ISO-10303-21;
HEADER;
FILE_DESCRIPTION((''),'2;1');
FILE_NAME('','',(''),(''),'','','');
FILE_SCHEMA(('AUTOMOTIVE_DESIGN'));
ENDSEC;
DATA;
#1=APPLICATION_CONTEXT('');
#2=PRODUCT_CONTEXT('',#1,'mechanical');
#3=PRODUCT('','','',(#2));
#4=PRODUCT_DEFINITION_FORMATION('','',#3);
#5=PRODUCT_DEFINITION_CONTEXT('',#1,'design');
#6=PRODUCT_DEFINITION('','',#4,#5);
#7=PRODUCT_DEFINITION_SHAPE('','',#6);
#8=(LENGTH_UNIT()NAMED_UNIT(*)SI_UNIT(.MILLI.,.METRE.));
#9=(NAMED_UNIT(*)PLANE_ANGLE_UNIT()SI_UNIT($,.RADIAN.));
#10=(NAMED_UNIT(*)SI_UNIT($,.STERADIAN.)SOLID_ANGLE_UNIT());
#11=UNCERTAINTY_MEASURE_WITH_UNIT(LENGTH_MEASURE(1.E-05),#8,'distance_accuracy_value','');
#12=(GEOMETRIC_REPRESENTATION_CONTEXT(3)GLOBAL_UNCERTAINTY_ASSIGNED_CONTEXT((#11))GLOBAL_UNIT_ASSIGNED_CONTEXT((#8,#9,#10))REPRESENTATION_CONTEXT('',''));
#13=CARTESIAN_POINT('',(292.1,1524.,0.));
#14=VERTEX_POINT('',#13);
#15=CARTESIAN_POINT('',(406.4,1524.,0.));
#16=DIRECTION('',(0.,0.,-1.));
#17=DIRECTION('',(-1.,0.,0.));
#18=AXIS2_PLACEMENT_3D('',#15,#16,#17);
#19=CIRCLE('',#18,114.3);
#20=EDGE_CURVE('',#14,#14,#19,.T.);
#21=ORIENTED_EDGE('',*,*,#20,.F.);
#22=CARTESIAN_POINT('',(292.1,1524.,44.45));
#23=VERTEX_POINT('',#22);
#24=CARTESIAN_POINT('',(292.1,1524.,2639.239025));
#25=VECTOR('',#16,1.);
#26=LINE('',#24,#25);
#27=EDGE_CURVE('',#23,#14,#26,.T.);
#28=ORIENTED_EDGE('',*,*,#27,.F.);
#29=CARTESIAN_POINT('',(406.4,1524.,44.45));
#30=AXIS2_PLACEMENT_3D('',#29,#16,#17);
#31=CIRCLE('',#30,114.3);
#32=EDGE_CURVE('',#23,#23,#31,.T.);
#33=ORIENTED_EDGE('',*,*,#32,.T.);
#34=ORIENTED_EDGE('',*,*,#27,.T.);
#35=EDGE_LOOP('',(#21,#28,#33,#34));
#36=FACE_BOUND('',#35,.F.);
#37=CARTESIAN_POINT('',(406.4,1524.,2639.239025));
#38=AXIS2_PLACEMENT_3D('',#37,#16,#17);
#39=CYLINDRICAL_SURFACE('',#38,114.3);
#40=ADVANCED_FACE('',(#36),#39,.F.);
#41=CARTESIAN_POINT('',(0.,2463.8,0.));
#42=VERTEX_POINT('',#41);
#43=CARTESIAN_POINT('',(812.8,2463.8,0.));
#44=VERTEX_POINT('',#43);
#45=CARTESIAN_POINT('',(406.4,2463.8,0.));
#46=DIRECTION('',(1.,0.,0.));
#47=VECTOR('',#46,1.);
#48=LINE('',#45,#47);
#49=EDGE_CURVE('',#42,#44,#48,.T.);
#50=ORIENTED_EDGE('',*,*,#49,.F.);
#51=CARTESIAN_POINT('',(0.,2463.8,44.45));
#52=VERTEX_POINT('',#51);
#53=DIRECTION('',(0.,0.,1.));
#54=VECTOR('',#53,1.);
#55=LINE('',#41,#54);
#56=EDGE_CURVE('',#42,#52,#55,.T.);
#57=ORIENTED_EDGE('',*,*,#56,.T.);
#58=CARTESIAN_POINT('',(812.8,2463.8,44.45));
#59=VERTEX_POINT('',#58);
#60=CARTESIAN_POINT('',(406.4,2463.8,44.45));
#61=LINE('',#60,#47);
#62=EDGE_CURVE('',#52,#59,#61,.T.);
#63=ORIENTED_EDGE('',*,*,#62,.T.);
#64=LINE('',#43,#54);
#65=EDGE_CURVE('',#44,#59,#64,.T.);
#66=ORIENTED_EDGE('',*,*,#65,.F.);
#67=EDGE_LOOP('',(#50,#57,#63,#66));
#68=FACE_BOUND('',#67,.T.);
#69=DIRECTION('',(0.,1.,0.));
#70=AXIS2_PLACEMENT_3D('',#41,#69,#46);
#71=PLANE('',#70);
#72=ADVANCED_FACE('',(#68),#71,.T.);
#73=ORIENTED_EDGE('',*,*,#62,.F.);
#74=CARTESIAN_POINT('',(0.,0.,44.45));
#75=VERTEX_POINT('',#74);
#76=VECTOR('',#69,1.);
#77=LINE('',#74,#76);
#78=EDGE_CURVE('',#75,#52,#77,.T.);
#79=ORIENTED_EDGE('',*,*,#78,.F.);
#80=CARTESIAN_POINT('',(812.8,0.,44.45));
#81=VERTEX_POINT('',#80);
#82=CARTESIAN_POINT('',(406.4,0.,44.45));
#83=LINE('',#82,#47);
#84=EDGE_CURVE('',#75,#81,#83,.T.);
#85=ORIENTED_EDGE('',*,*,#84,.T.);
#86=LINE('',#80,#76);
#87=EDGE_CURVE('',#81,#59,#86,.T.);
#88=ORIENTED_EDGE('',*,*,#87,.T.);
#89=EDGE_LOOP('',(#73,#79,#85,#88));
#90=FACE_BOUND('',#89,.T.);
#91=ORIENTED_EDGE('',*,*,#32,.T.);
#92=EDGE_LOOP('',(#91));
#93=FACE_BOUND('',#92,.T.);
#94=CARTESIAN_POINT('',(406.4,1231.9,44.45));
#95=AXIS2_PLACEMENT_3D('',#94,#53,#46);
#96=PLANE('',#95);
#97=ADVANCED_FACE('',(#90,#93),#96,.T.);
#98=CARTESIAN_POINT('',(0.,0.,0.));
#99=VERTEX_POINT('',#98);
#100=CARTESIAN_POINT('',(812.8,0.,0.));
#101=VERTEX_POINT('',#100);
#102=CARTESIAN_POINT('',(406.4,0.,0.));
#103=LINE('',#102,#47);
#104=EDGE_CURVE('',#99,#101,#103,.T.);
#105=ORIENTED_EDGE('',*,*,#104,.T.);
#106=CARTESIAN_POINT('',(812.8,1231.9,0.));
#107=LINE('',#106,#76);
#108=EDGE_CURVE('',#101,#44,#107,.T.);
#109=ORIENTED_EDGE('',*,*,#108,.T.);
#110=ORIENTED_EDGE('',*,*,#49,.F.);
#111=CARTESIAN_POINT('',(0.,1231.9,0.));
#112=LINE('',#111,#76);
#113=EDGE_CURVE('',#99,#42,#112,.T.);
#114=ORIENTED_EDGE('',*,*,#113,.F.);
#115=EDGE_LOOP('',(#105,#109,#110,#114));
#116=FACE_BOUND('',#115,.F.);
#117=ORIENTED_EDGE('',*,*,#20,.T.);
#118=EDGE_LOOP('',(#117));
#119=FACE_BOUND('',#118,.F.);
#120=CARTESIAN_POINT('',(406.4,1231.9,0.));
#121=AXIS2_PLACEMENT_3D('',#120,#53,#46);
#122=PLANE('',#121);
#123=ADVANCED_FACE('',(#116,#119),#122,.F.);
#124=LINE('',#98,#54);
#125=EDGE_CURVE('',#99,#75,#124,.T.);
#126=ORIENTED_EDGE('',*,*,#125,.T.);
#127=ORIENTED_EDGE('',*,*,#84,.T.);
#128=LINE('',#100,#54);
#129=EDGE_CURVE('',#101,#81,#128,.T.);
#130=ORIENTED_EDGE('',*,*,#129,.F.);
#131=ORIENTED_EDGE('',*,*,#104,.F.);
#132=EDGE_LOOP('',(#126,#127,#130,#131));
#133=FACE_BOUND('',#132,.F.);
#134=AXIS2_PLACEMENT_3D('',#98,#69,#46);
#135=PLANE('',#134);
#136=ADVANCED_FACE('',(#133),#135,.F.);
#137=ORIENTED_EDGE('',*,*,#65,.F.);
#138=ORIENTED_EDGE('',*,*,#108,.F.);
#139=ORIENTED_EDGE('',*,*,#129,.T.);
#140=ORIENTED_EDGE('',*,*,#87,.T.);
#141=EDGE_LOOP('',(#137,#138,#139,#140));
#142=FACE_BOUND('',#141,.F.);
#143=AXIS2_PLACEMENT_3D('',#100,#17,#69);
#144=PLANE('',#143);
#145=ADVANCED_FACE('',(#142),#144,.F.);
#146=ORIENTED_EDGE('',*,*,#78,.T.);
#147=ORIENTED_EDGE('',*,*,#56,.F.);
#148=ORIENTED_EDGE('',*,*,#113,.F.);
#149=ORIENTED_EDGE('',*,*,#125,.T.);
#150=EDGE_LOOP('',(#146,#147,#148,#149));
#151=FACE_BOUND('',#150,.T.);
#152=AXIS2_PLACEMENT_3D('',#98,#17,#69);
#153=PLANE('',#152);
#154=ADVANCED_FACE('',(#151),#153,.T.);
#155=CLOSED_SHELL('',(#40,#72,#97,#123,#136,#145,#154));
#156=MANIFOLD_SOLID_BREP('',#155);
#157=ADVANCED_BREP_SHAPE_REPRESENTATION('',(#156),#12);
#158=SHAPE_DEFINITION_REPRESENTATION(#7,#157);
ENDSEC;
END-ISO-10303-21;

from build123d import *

# Parameters (mm, degrees)
F0_W     = 812.8
F0_H     = 2463.8
F1_DEPTH = 44.45
F3_D     = 228.6
F4_W     = 812.8
F4_H     = 50.8
F5_DEPTH = 3.429


# Not quite as in the source:
# - a feature names something its author has since deleted; it is built from what else it names


with BuildPart() as f1:
    # F0 (on Top) → F1 (new body)
    with BuildSketch(Plane.XY):
        with Locations((406.4, 1231.9)):
            Rectangle(F0_W, F0_H)
    extrude(amount=F1_DEPTH)

    # F3 (through all)
    with Locations(Plane.XY.offset(44.45)):
        with Locations((406.4, 1524)):
            Hole(F3_D / 2)

    # F4 (on face) → F5 (join)
    with BuildSketch(Plane.XY.offset(44.45)):
        with Locations((406.4, 2133.6)):
            Rectangle(F4_W, F4_H)
        with Locations((406.4, 2032)):
            Rectangle(F4_W, F4_H)
        with Locations((406.4, 1930.4)):
            Rectangle(F4_W, F4_H)
        with Locations((406.4, 1828.8)):
            Rectangle(F4_W, F4_H)
        with Locations((406.4, 1727.2)):
            Rectangle(F4_W, F4_H)
        with BuildLine():
            Line((0, 1549.4), (0, 1498.6))
            Line((0, 1498.6), (256.1315735093, 1498.6))
            ThreePointArc((256.1315735093, 1498.6), (254, 1524), (256.1315735093, 1549.4))
            Line((256.1315735093, 1549.4), (0, 1549.4))
        make_face()
        with BuildLine():
            Line((556.6684264907, 1498.6), (812.8, 1498.6))
            Line((812.8, 1498.6), (812.8, 1549.4))
            Line((812.8, 1549.4), (556.6684264907, 1549.4))
            ThreePointArc((556.6684264907, 1549.4), (558.2661716729, 1536.7446420666), (558.8, 1524))
            ThreePointArc((558.8, 1524), (558.2661716729, 1511.2553579334), (556.6684264907, 1498.6))
        make_face()
        with BuildLine():
            Line((490.642269675, 1397), (812.8, 1397))
            Line((812.8, 1397), (812.8, 1447.8))
            Line((812.8, 1447.8), (538.3822715367, 1447.8))
            ThreePointArc((538.3822715367, 1447.8), (517.455945611, 1419.6336407436), (490.642269675, 1397))
        make_face()
        with Locations((406.4, 1320.8)):
            Rectangle(F4_W, F4_H)
        Polygon((0, 1231.9), (0, 1193.8), (812.8, 1193.8), (812.8, 1231.9), (812.8, 1244.6), (0, 1244.6), align=None)
        with Locations((406.4, 1117.6)):
            Rectangle(F4_W, F4_H)
        with Locations((406.4, 1016)):
            Rectangle(F4_W, F4_H)
        with Locations((406.4, 914.4)):
            Rectangle(F4_W, F4_H)
        with Locations((406.4, 812.8)):
            Rectangle(F4_W, F4_H)
        with Locations((406.4, 711.2)):
            Rectangle(F4_W, F4_H)
        with Locations((406.4, 609.6)):
            Rectangle(F4_W, F4_H)
        with Locations((406.4, 508)):
            Rectangle(F4_W, F4_H)
        with Locations((406.4, 406.4)):
            Rectangle(F4_W, F4_H)
        with Locations((406.4, 304.8)):
            Rectangle(F4_W, F4_H)
        with Locations((406.4, 203.2)):
            Rectangle(F4_W, F4_H)
        with BuildLine():
            Line((538.3822715367, 1600.2), (812.8, 1600.2))
            Line((812.8, 1600.2), (812.8, 1651))
            Line((812.8, 1651), (490.642269675, 1651))
            ThreePointArc((490.642269675, 1651), (517.455945611, 1628.3663592564), (538.3822715367, 1600.2))
        make_face()
        with BuildLine():
            Line((0, 1447.8), (0, 1397))
            Line((0, 1397), (322.157730325, 1397))
            ThreePointArc((322.157730325, 1397), (295.344054389, 1419.6336407436), (274.4177284633, 1447.8))
            Line((274.4177284633, 1447.8), (0, 1447.8))
        make_face()
        with BuildLine():
            Line((0, 1651), (0, 1600.2))
            Line((0, 1600.2), (274.4177284633, 1600.2))
            ThreePointArc((274.4177284633, 1600.2), (295.344054389, 1628.3663592564), (322.157730325, 1651))
            Line((322.157730325, 1651), (0, 1651))
        make_face()
    extrude(amount=-F5_DEPTH)


solid = f1.part
